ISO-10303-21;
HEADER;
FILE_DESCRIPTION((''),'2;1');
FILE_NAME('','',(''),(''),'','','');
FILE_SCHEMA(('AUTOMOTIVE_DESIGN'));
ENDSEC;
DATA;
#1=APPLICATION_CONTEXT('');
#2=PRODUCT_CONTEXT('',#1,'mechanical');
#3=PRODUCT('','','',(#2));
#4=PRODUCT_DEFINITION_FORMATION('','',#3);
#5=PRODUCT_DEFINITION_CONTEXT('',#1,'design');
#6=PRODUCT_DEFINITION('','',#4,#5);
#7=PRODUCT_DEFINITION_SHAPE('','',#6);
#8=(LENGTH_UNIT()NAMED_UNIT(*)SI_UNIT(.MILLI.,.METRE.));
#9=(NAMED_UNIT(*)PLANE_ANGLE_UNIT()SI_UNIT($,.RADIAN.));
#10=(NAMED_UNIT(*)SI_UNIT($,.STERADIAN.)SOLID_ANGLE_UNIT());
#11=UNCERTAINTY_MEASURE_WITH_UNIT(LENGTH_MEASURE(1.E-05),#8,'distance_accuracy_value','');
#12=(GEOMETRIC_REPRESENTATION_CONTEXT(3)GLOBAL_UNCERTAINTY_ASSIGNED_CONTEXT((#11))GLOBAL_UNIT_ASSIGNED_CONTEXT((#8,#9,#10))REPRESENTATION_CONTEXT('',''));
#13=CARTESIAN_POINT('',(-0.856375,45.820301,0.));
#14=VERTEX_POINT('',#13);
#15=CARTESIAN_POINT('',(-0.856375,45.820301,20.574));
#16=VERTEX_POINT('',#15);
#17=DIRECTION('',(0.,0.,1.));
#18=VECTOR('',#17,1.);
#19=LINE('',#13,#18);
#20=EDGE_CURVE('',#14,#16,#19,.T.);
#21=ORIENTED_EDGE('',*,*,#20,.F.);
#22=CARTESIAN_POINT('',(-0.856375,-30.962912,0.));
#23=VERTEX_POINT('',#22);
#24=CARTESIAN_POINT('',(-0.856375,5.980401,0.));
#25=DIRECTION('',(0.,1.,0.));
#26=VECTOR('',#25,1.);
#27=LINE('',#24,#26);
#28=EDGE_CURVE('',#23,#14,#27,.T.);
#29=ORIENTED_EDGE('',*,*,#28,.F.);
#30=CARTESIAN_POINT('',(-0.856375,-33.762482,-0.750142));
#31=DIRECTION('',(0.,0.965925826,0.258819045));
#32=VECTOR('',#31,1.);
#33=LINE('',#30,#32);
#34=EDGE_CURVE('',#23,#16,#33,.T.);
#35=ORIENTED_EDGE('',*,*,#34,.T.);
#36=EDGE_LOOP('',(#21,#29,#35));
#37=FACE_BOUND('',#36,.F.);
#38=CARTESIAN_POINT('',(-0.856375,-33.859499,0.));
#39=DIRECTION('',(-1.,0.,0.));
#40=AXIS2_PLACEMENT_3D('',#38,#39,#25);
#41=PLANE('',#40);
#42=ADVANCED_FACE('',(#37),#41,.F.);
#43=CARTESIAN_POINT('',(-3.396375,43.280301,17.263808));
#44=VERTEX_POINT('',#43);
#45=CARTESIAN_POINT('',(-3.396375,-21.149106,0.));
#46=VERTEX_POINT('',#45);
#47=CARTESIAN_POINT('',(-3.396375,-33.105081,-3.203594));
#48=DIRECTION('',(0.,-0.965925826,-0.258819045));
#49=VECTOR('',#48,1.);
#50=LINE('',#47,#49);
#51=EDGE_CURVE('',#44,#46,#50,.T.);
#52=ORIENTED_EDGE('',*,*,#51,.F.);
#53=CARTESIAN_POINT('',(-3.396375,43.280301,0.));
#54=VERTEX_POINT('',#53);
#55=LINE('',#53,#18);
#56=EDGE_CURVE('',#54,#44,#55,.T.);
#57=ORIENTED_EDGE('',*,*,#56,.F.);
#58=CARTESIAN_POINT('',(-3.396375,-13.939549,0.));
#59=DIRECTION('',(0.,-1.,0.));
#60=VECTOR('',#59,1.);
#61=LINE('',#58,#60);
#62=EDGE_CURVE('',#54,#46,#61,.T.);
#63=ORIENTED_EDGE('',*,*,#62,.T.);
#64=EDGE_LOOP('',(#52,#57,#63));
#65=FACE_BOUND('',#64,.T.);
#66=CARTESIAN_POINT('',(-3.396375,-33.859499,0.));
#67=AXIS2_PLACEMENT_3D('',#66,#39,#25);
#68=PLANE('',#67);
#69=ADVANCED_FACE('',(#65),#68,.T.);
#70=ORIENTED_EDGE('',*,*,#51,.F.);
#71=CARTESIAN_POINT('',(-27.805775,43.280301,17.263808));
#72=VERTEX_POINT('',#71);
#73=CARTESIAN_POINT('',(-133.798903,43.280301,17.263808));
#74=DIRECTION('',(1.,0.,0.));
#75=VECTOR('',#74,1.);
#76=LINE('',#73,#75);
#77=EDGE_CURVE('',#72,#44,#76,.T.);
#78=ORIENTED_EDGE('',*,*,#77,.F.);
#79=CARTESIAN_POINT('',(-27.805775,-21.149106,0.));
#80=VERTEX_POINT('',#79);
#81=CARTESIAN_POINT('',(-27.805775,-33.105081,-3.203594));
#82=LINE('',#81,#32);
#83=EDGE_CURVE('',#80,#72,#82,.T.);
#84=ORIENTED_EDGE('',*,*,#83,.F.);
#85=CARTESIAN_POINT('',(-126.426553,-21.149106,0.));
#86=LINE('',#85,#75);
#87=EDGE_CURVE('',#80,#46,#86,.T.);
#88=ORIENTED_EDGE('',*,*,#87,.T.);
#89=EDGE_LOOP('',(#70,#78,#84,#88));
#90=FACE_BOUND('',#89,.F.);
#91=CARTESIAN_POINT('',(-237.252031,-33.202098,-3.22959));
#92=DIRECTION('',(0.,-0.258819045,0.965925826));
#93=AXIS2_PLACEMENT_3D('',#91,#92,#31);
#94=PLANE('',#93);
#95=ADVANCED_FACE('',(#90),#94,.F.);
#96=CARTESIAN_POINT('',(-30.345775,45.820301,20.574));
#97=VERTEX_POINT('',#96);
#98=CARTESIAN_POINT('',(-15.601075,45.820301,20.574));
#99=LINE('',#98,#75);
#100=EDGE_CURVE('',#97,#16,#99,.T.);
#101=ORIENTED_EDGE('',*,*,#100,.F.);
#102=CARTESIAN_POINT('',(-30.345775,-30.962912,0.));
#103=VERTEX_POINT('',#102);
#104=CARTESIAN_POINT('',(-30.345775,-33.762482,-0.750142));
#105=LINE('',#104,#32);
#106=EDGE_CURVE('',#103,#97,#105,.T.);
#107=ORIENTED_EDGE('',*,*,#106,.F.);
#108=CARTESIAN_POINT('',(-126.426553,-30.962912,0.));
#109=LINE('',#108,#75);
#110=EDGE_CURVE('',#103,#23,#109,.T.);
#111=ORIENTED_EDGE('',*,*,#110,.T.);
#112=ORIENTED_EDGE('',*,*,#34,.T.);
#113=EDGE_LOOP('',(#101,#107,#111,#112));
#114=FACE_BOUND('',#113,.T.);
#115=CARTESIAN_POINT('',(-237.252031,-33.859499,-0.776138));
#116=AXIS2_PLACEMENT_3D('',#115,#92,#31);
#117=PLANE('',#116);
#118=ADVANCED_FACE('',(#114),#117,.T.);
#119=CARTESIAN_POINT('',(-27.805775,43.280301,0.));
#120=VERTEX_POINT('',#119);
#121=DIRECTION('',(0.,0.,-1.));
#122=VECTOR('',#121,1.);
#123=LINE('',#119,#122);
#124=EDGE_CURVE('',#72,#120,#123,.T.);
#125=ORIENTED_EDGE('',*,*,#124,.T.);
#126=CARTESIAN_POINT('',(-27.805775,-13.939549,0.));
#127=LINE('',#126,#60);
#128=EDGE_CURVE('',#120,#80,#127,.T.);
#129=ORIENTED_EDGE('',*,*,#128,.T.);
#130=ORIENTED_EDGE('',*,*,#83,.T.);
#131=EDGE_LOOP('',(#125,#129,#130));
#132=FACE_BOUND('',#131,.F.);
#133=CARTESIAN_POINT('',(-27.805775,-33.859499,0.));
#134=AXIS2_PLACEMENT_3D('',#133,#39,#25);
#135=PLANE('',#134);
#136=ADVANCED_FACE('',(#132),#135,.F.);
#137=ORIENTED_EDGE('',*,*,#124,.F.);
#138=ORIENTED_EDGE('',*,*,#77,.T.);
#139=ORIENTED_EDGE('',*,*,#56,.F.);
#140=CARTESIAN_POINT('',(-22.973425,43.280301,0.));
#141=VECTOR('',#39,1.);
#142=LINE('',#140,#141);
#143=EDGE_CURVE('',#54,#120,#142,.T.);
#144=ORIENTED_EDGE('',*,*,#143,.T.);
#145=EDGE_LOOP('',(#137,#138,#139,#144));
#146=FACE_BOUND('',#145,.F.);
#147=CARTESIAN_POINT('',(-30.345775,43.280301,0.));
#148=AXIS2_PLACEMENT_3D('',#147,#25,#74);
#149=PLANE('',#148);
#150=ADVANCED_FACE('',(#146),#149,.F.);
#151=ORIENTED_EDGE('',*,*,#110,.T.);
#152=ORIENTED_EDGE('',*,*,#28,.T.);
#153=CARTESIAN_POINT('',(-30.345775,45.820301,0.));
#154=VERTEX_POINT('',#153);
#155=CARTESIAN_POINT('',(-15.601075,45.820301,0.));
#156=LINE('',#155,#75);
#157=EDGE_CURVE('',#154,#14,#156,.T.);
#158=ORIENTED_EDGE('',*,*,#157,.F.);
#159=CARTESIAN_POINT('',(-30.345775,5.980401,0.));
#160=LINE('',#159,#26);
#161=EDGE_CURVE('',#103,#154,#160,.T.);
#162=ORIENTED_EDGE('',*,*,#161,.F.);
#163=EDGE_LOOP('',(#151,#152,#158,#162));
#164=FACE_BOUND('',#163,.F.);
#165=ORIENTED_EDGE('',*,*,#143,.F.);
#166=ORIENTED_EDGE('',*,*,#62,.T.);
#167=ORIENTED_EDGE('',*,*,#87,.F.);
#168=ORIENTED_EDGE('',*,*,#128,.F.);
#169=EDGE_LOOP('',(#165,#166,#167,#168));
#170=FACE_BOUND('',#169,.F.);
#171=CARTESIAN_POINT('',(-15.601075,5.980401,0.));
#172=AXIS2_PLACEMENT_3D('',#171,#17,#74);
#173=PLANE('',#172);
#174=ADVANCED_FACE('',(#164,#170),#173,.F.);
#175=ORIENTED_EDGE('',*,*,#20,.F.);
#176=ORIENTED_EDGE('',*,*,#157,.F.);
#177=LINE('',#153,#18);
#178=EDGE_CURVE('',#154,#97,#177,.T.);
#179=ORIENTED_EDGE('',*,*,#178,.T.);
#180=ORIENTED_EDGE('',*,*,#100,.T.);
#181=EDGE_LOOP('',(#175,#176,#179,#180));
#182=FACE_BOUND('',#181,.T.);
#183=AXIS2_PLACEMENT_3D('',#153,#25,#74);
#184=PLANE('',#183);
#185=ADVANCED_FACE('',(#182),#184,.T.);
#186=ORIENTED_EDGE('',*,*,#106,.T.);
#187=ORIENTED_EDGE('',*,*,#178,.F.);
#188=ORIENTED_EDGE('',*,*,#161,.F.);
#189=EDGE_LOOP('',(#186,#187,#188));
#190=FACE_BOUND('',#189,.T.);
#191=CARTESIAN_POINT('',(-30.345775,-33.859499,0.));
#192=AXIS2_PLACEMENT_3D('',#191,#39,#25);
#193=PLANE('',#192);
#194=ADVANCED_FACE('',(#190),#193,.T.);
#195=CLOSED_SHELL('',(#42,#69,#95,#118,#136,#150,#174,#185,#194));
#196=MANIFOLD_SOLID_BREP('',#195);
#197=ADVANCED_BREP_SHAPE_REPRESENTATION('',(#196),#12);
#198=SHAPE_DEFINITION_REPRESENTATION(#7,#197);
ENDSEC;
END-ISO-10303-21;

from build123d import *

# Parameters (mm, degrees)
F0_W        = 29.4894
F0_H        = 79.6798
F1_DEPTH    = 20.574
F2_T1_DEPTH = 443.3019107385
F3_T        = -2.54


# Not quite as in the source:
# - a fillet or chamfer that OpenCascade refuses, or shapes differently, is made with other operations: its cross-section is extruded or revolved along the edge and cut away or added


with BuildPart() as f1:
    # F0 (on Top) → F1 (new body)
    with BuildSketch(Plane.XY):
        with Locations((-15.601075187, 5.9804012012)):
            Rectangle(F0_W, F0_H)
    extrude(amount=F1_DEPTH)

    # F2: chamfer of 79.6798 x 21.3501380631 on 1 edges, made by hand

    # F2_s2 → F2_t1 (cut)
    with BuildSketch(Plane.YZ.offset(-237.2520305563)):
        Polygon((-33.8594987988, -0.7761380631), (45.8203012012, 20.574), (-33.8594987988, 20.574), align=None)
    extrude(amount=F2_T1_DEPTH, mode=Mode.SUBTRACT)

    # F3
    f3_openings = [f1.faces().sort_by_distance(p)[0] for p in [
        (-15.601075, 7.428695, 0),
    ]]
    offset(amount=F3_T, openings=f3_openings, kind=Kind.INTERSECTION)


solid = f1.part
